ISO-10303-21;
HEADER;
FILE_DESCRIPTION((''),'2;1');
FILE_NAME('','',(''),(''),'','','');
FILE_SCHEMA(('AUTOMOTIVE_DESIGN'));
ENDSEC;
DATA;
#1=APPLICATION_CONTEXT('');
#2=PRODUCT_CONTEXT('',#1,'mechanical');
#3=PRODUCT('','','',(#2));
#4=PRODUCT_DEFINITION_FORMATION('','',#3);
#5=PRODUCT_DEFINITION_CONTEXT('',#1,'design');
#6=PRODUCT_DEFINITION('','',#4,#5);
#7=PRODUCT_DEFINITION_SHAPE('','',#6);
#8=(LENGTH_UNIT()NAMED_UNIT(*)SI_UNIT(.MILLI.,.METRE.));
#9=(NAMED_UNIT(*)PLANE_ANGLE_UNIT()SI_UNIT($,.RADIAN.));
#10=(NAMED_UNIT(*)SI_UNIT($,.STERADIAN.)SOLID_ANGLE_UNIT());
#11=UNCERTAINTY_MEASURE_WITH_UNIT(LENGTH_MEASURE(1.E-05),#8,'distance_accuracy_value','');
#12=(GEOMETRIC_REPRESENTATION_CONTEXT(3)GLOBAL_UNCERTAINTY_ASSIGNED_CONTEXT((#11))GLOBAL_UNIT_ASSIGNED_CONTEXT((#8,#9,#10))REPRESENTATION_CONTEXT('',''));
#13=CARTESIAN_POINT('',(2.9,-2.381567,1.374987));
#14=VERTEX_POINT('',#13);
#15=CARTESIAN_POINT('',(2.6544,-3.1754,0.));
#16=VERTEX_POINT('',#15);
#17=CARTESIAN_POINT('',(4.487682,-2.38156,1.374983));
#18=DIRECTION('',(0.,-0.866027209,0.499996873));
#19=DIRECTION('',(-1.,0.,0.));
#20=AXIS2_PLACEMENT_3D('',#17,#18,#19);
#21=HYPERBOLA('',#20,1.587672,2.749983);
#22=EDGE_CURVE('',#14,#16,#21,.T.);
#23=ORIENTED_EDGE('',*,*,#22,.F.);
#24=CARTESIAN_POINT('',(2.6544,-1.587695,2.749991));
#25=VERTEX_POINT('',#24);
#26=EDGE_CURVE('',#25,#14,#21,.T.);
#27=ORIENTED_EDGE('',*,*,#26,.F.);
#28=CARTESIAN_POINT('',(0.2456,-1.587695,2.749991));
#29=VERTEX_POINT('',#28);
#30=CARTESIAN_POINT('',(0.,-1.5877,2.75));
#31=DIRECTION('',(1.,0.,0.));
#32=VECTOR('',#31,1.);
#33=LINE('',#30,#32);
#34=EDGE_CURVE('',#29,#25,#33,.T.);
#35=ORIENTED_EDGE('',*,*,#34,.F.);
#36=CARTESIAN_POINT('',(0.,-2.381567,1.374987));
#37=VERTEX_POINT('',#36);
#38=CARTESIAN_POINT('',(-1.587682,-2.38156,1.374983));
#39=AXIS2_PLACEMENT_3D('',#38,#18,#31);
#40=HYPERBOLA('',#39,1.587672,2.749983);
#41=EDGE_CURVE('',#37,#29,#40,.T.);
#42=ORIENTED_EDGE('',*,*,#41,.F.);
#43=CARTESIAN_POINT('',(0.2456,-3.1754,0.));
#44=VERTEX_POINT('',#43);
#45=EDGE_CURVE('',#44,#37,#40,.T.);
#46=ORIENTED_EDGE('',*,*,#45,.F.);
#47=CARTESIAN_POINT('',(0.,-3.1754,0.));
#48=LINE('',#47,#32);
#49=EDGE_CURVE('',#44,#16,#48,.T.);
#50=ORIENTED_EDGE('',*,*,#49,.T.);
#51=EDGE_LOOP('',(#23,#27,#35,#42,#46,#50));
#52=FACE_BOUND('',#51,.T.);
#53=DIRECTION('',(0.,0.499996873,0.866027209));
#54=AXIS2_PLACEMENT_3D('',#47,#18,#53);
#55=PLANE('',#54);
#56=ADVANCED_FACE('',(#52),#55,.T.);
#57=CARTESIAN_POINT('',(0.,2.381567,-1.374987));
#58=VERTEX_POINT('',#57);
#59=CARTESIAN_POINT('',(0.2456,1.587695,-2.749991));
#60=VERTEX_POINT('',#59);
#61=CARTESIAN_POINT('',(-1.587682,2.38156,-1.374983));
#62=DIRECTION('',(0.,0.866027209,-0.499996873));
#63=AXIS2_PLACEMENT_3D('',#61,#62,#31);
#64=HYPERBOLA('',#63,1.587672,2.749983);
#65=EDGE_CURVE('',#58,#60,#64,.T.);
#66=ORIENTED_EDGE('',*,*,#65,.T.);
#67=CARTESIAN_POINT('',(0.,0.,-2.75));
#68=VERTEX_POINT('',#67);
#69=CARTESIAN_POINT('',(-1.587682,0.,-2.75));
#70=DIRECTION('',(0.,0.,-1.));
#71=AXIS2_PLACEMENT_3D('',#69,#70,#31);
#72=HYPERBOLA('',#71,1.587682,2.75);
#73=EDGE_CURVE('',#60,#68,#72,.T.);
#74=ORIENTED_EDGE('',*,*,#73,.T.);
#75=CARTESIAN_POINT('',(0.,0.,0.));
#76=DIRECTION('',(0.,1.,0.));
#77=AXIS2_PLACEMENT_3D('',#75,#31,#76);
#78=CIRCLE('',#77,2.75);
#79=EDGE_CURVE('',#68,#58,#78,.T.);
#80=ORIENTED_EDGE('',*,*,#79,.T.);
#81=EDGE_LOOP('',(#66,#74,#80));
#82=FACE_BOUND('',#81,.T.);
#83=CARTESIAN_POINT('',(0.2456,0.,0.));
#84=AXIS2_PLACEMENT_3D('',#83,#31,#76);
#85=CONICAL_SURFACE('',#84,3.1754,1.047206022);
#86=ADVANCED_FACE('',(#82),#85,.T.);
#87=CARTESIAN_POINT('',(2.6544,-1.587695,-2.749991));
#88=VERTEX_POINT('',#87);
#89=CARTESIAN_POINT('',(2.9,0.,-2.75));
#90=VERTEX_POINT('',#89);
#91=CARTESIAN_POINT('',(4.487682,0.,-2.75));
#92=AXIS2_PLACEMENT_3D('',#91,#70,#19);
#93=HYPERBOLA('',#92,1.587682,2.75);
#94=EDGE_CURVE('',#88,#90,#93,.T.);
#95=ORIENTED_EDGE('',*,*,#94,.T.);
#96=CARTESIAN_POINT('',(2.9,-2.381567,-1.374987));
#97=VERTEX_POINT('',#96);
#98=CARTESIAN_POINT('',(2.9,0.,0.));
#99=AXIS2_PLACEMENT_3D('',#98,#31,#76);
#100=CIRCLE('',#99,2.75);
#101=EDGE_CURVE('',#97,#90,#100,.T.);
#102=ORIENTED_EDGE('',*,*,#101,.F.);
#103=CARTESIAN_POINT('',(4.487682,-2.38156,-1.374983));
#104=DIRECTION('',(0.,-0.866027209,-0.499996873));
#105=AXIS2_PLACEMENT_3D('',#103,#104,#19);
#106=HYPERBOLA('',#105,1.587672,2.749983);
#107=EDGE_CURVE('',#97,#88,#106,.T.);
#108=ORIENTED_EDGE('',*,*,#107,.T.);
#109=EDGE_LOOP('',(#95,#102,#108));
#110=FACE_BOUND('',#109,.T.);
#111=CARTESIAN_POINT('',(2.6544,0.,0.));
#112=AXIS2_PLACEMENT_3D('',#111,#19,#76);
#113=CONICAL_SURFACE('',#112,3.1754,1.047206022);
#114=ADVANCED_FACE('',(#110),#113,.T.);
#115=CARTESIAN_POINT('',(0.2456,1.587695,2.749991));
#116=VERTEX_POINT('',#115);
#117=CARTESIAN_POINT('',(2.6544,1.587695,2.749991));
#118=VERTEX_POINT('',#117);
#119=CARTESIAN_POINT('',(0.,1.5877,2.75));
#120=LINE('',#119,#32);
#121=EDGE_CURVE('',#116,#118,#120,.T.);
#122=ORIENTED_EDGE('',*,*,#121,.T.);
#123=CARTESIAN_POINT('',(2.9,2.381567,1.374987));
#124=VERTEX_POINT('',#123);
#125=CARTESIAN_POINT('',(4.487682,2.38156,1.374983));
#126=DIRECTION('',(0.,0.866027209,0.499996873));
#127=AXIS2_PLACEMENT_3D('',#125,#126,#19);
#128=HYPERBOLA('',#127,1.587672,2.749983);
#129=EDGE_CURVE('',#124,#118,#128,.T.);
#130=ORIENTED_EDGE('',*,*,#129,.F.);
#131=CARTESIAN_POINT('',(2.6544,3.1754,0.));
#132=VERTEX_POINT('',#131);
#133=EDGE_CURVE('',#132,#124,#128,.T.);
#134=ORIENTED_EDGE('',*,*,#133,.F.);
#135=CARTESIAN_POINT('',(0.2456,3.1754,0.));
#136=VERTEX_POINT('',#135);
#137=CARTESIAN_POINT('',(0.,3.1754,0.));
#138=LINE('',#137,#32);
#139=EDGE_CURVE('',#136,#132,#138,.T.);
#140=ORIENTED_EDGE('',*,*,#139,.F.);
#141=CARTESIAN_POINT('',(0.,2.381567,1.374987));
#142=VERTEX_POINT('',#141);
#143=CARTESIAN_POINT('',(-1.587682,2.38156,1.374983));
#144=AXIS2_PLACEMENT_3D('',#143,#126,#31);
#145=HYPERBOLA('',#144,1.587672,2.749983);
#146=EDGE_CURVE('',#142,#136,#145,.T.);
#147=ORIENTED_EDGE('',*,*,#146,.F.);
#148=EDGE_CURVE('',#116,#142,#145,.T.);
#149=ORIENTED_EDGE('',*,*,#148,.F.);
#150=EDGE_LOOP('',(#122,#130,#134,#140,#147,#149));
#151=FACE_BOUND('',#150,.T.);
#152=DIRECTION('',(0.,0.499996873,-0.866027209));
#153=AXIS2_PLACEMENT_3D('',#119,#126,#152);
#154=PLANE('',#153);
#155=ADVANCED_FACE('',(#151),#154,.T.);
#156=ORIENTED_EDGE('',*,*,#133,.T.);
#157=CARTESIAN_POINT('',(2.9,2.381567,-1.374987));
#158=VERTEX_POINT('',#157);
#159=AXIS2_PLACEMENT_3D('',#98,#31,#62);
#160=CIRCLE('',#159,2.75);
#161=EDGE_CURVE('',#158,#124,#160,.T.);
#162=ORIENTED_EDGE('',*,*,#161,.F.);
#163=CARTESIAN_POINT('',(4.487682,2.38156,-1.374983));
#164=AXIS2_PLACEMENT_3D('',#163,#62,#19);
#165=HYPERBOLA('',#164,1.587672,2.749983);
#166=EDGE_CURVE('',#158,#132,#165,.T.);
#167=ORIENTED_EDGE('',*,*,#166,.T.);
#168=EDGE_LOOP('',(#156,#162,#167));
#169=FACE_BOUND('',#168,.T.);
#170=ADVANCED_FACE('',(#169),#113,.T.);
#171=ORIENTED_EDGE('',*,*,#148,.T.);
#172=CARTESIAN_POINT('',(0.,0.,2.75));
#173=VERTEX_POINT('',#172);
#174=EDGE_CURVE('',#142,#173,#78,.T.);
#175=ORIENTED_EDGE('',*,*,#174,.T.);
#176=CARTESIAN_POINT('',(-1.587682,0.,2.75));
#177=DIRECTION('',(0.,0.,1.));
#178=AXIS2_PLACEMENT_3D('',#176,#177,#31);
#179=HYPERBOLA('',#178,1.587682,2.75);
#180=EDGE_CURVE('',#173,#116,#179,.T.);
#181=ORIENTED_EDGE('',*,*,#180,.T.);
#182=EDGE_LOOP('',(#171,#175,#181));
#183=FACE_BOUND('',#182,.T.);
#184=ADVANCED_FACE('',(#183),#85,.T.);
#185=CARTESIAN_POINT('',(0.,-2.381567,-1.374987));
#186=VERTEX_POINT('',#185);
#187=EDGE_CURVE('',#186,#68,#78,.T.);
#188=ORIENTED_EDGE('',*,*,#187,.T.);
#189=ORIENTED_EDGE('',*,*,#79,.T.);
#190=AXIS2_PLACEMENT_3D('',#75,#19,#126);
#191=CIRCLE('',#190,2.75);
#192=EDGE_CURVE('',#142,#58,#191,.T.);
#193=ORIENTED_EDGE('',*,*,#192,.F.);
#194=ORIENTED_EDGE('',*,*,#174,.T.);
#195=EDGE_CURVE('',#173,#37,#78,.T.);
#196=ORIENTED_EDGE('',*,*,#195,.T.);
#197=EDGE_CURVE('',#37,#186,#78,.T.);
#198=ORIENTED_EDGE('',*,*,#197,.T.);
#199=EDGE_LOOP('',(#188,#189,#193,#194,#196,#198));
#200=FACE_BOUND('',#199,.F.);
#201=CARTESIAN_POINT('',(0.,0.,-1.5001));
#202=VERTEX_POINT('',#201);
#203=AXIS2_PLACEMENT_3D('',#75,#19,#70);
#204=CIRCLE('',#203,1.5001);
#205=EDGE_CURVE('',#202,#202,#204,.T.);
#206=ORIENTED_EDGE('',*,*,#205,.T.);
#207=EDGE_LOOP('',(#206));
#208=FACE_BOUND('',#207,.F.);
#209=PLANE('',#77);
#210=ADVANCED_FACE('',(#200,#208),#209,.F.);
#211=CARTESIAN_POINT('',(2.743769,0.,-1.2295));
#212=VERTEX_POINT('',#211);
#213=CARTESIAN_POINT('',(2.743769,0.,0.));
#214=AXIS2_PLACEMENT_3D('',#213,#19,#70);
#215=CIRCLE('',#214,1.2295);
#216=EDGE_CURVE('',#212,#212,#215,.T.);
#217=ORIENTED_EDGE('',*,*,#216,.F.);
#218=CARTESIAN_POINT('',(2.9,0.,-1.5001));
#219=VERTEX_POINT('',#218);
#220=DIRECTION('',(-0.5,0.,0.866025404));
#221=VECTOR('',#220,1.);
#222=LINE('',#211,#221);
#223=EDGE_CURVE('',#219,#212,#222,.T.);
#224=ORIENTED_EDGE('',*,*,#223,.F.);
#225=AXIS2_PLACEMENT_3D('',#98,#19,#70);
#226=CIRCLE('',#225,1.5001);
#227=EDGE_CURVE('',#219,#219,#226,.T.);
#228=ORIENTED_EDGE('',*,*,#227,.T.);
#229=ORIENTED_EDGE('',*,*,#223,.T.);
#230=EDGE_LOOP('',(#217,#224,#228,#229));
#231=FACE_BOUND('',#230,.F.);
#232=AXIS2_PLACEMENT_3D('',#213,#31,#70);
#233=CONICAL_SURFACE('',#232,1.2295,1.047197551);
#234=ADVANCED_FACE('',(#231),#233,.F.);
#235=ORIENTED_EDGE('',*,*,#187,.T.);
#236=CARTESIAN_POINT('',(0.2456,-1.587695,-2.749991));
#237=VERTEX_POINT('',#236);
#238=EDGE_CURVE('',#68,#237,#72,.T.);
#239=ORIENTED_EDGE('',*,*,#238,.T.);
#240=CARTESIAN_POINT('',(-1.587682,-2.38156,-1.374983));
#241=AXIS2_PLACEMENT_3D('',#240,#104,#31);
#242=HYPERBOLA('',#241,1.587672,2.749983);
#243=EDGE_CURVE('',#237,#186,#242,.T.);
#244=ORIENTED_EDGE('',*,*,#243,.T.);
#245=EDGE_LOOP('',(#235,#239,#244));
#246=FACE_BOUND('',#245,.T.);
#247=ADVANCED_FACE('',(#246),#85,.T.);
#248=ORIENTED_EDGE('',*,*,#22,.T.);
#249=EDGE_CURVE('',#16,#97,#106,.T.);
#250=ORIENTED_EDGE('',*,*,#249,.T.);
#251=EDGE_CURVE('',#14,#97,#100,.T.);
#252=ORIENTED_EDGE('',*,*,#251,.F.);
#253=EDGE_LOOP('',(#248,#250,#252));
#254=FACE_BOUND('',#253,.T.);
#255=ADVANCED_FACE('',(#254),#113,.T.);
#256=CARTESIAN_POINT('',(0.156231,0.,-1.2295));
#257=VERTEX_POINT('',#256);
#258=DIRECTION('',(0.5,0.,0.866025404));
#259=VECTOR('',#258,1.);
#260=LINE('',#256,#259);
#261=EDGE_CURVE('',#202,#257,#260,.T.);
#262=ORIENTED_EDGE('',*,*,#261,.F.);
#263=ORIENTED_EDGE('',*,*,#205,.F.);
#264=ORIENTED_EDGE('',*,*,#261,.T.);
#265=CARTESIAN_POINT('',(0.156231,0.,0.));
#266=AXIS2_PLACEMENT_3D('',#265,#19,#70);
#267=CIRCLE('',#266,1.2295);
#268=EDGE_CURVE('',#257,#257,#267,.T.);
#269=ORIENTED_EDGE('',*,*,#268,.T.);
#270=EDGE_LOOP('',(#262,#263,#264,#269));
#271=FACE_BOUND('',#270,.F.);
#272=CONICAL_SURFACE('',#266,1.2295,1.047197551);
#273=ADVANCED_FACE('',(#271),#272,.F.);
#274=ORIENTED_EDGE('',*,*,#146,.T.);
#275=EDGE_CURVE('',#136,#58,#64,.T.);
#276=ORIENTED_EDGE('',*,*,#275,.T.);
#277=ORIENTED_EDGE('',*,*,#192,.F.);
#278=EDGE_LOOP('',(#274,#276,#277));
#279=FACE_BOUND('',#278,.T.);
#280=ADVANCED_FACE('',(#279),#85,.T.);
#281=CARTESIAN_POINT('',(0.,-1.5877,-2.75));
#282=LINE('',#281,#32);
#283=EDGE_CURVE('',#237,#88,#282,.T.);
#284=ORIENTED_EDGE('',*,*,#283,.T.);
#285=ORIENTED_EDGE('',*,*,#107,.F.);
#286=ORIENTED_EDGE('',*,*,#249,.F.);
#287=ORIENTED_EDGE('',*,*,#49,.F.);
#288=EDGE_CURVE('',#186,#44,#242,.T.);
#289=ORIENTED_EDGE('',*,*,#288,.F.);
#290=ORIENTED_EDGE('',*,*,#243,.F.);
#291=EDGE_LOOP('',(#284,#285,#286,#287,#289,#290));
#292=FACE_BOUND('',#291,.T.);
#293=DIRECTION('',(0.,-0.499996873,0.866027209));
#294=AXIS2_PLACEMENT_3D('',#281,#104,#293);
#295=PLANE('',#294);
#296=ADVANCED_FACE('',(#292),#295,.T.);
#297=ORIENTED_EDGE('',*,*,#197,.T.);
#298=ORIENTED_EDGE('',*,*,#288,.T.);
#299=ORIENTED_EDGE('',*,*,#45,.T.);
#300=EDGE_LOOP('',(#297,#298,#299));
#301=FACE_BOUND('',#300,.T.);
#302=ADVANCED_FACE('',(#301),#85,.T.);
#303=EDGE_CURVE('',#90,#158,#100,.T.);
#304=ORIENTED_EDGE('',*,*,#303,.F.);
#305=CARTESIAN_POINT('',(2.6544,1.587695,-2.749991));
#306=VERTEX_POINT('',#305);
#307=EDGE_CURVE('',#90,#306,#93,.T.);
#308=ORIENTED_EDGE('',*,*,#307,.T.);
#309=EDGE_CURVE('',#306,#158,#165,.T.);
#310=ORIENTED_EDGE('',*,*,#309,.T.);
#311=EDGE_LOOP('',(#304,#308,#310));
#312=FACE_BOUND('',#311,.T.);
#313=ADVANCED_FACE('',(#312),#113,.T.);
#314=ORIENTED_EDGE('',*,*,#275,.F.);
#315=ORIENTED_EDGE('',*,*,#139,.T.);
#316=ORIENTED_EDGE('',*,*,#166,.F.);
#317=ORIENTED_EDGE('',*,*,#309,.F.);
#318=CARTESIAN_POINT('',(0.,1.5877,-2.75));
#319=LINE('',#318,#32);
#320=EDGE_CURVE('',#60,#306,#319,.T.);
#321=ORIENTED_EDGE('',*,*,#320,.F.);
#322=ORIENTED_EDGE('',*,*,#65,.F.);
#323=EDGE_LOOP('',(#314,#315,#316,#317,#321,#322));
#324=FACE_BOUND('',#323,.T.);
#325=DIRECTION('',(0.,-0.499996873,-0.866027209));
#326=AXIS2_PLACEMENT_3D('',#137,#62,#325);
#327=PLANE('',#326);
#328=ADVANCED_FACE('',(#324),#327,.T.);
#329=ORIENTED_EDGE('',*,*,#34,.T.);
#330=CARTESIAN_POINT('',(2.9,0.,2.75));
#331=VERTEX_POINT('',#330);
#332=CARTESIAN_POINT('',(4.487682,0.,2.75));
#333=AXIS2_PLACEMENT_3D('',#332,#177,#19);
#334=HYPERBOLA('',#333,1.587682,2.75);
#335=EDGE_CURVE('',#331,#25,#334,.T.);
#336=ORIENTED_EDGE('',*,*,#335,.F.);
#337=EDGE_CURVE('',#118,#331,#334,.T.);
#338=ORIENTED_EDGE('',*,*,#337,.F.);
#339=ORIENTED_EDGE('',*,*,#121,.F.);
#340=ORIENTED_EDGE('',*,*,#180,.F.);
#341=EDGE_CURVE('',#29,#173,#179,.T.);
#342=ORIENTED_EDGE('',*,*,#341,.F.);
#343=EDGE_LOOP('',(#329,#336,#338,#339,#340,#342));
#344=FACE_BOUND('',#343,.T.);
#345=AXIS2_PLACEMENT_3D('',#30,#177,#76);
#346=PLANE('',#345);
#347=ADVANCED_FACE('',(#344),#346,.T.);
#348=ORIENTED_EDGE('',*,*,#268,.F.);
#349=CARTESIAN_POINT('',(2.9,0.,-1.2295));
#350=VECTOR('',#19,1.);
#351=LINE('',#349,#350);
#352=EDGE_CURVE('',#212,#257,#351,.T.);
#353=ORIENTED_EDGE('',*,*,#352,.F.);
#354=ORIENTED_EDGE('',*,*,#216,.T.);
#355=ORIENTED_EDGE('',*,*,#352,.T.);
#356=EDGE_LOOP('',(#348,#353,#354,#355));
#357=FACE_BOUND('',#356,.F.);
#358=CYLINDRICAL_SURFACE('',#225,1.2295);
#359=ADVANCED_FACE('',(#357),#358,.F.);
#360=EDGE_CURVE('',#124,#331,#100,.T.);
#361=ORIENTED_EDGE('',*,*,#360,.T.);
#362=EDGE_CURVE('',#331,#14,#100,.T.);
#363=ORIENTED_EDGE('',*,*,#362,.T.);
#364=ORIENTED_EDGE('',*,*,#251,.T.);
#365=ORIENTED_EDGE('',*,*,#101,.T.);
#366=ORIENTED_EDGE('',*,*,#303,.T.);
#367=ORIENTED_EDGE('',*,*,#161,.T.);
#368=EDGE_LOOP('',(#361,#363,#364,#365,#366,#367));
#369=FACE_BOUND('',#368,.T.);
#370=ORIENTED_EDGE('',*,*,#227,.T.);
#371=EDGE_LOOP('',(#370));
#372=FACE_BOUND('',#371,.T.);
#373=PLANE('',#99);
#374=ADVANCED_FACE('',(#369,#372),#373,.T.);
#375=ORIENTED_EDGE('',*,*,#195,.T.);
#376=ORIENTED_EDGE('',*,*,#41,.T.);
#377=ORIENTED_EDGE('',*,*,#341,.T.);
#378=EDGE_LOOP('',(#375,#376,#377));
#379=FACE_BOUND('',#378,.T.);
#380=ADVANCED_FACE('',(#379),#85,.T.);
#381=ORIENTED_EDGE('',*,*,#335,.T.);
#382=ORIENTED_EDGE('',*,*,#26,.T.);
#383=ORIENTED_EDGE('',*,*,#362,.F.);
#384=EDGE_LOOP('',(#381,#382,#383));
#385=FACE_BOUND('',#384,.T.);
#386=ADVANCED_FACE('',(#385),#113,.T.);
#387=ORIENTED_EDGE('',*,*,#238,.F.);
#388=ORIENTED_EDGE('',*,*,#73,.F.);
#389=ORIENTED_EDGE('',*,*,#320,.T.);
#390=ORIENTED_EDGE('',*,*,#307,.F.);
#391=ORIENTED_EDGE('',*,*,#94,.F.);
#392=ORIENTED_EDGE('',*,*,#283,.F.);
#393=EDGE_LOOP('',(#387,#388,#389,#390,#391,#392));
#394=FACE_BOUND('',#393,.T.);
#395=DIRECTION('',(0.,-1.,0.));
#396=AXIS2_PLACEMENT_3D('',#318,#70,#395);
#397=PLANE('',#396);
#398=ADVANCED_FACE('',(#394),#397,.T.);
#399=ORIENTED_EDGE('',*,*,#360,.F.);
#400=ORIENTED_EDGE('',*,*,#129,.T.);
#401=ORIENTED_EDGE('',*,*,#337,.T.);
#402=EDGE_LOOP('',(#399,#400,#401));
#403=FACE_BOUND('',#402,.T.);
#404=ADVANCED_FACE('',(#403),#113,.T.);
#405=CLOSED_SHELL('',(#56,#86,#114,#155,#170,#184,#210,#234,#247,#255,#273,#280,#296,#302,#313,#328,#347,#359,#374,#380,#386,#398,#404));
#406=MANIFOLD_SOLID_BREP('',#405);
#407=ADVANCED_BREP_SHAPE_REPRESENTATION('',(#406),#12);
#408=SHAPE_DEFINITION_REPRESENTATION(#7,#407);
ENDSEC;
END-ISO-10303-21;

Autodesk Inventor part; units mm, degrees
ref_plane "YZ Plane" through (0, 0, 0) normal (1, 0, 0) x (0, 1, 0)
ref_plane "XZ Plane" through (0, 0, 0) normal (0, 1, 0) x (-1, 0, 0)
sketch "Esquisse1" plane through (0, 0, 0) normal (1, 0, 0) x (0, 1, 0)
  line L0 (-3.1754, 0) -> (-1.5877, 2.75)
  line L1 (-1.5877, 2.75) -> (1.5877, 2.75)
  line L2 (1.5877, 2.75) -> (3.1754, 0)
  line L3 (3.1754, 0) -> (1.5877, -2.75)
  line L4 (1.5877, -2.75) -> (-1.5877, -2.75)
  line L5 (-1.5877, -2.75) -> (-3.1754, 0)
  point P0 (0, 0)
  point P1 (0, 0)
  dimension "d0" = 6.3509
extrude "Corps" add sketch "Esquisse1" along normal blind 2.9
sketch "Esquisse2" plane through (0, 0, 0) normal (0, 0, 1) x (1, 0, 0)
  line L0 (0, 1.5877) -> (0, 3.1754) projected
  line L1 (0, 3.1754) -> (2.9, 3.1754) projected
  line L2 (2.9, 1.5877) -> (2.9, 3.1754) projected
  line L3 (-0.58, 0) -> (3.48, 0) projected
  line L4 (0.2456, 3.1754) -> (0, 2.75)
  line L5 (2.6544, 3.1754) -> (2.9, 2.75)
  dimension "d3" = 30
  dimension "d4" = 30
  dimension "d5" = 5.5
  dimension "d6" = 5.5
revolve "Chanfrein1" cut sketch "Esquisse2" angle 360 about axis through (-10, 0, 0) along (1, 0, 0)
sketch "Esquisse3" plane through (2.9, 0, 0) normal (1, 0, 0) x (0, 0, -1)
  arc A0 (-1.375, -2.3816) -> (1.375, -2.3816) centre (0, 0) ccw projected
hole "Filetage" at (2.9, 0, 0) direction (-1, 0, 0) diameter 2.459 end through all thread size "M3x0.5" class "6H" standard "ANSI Metric M Profile"
chamfer "Chanfrein2" distance 0.2706 angle 30 1 edges at (2.9, 0, 1.2295) measured on face at (2.9, -2.2301, -0.0494)
chamfer "Chanfrein3" distance 0.2706 angle 30 1 edges at (0, 0, 1.2295) measured on face at (0, -2.2301, -0.0494)
ref_plane "Work Plane1" through (-5.9878, 0, 0) normal (0, -0.8660254, -0.5) x (1, 0, 0)
equation "\"d0\" = 1.1547 * SW"
equation "\"d1\" = KOH"
equation "\"d3\" = ANG1"
equation "\"d4\" = ANG2"
equation "\"d5\" = SW0"
equation "\"d6\" = SW01"
equation "\"d8\" = -0.5 * GD1 + 0.5 * NND"
equation "\"d40\" = -0.5 * GD1 + 0.5 * NND"
equation "\"d10\" = -0.5 * GD1 + 0.5 * NND"
equation "\"d41\" = -0.5 * GD1 + 0.5 * NND"
equation "\"ANG1\" = 30deg"
equation "\"ANG2\" = 30deg"
equation "\"NND\" = 3"
equation "\"KOH\" = 2.9"
equation "\"SW\" = 5.5"
equation "\"SW0\" = SW"
equation "\"SW01\" = SW"
equation "\"GUL\" = 0.541266 * PTC"
equation "\"THREADDIA\" = 3"
equation "\"TOA\" = 30deg"
equation "\"PTC\" = 0.5"
equation "\"E0\" = 1.155 * SW"
equation "\"GAL\" = 0.541266 * PTC"
equation "\"SD2\" = 0"
equation "\"WFT\" = 0"
equation "\"GD1\" = 2.458734"
properties part number "ANSI B18.2.4.2M - M3 x 0,5" material "Acier, doux"
